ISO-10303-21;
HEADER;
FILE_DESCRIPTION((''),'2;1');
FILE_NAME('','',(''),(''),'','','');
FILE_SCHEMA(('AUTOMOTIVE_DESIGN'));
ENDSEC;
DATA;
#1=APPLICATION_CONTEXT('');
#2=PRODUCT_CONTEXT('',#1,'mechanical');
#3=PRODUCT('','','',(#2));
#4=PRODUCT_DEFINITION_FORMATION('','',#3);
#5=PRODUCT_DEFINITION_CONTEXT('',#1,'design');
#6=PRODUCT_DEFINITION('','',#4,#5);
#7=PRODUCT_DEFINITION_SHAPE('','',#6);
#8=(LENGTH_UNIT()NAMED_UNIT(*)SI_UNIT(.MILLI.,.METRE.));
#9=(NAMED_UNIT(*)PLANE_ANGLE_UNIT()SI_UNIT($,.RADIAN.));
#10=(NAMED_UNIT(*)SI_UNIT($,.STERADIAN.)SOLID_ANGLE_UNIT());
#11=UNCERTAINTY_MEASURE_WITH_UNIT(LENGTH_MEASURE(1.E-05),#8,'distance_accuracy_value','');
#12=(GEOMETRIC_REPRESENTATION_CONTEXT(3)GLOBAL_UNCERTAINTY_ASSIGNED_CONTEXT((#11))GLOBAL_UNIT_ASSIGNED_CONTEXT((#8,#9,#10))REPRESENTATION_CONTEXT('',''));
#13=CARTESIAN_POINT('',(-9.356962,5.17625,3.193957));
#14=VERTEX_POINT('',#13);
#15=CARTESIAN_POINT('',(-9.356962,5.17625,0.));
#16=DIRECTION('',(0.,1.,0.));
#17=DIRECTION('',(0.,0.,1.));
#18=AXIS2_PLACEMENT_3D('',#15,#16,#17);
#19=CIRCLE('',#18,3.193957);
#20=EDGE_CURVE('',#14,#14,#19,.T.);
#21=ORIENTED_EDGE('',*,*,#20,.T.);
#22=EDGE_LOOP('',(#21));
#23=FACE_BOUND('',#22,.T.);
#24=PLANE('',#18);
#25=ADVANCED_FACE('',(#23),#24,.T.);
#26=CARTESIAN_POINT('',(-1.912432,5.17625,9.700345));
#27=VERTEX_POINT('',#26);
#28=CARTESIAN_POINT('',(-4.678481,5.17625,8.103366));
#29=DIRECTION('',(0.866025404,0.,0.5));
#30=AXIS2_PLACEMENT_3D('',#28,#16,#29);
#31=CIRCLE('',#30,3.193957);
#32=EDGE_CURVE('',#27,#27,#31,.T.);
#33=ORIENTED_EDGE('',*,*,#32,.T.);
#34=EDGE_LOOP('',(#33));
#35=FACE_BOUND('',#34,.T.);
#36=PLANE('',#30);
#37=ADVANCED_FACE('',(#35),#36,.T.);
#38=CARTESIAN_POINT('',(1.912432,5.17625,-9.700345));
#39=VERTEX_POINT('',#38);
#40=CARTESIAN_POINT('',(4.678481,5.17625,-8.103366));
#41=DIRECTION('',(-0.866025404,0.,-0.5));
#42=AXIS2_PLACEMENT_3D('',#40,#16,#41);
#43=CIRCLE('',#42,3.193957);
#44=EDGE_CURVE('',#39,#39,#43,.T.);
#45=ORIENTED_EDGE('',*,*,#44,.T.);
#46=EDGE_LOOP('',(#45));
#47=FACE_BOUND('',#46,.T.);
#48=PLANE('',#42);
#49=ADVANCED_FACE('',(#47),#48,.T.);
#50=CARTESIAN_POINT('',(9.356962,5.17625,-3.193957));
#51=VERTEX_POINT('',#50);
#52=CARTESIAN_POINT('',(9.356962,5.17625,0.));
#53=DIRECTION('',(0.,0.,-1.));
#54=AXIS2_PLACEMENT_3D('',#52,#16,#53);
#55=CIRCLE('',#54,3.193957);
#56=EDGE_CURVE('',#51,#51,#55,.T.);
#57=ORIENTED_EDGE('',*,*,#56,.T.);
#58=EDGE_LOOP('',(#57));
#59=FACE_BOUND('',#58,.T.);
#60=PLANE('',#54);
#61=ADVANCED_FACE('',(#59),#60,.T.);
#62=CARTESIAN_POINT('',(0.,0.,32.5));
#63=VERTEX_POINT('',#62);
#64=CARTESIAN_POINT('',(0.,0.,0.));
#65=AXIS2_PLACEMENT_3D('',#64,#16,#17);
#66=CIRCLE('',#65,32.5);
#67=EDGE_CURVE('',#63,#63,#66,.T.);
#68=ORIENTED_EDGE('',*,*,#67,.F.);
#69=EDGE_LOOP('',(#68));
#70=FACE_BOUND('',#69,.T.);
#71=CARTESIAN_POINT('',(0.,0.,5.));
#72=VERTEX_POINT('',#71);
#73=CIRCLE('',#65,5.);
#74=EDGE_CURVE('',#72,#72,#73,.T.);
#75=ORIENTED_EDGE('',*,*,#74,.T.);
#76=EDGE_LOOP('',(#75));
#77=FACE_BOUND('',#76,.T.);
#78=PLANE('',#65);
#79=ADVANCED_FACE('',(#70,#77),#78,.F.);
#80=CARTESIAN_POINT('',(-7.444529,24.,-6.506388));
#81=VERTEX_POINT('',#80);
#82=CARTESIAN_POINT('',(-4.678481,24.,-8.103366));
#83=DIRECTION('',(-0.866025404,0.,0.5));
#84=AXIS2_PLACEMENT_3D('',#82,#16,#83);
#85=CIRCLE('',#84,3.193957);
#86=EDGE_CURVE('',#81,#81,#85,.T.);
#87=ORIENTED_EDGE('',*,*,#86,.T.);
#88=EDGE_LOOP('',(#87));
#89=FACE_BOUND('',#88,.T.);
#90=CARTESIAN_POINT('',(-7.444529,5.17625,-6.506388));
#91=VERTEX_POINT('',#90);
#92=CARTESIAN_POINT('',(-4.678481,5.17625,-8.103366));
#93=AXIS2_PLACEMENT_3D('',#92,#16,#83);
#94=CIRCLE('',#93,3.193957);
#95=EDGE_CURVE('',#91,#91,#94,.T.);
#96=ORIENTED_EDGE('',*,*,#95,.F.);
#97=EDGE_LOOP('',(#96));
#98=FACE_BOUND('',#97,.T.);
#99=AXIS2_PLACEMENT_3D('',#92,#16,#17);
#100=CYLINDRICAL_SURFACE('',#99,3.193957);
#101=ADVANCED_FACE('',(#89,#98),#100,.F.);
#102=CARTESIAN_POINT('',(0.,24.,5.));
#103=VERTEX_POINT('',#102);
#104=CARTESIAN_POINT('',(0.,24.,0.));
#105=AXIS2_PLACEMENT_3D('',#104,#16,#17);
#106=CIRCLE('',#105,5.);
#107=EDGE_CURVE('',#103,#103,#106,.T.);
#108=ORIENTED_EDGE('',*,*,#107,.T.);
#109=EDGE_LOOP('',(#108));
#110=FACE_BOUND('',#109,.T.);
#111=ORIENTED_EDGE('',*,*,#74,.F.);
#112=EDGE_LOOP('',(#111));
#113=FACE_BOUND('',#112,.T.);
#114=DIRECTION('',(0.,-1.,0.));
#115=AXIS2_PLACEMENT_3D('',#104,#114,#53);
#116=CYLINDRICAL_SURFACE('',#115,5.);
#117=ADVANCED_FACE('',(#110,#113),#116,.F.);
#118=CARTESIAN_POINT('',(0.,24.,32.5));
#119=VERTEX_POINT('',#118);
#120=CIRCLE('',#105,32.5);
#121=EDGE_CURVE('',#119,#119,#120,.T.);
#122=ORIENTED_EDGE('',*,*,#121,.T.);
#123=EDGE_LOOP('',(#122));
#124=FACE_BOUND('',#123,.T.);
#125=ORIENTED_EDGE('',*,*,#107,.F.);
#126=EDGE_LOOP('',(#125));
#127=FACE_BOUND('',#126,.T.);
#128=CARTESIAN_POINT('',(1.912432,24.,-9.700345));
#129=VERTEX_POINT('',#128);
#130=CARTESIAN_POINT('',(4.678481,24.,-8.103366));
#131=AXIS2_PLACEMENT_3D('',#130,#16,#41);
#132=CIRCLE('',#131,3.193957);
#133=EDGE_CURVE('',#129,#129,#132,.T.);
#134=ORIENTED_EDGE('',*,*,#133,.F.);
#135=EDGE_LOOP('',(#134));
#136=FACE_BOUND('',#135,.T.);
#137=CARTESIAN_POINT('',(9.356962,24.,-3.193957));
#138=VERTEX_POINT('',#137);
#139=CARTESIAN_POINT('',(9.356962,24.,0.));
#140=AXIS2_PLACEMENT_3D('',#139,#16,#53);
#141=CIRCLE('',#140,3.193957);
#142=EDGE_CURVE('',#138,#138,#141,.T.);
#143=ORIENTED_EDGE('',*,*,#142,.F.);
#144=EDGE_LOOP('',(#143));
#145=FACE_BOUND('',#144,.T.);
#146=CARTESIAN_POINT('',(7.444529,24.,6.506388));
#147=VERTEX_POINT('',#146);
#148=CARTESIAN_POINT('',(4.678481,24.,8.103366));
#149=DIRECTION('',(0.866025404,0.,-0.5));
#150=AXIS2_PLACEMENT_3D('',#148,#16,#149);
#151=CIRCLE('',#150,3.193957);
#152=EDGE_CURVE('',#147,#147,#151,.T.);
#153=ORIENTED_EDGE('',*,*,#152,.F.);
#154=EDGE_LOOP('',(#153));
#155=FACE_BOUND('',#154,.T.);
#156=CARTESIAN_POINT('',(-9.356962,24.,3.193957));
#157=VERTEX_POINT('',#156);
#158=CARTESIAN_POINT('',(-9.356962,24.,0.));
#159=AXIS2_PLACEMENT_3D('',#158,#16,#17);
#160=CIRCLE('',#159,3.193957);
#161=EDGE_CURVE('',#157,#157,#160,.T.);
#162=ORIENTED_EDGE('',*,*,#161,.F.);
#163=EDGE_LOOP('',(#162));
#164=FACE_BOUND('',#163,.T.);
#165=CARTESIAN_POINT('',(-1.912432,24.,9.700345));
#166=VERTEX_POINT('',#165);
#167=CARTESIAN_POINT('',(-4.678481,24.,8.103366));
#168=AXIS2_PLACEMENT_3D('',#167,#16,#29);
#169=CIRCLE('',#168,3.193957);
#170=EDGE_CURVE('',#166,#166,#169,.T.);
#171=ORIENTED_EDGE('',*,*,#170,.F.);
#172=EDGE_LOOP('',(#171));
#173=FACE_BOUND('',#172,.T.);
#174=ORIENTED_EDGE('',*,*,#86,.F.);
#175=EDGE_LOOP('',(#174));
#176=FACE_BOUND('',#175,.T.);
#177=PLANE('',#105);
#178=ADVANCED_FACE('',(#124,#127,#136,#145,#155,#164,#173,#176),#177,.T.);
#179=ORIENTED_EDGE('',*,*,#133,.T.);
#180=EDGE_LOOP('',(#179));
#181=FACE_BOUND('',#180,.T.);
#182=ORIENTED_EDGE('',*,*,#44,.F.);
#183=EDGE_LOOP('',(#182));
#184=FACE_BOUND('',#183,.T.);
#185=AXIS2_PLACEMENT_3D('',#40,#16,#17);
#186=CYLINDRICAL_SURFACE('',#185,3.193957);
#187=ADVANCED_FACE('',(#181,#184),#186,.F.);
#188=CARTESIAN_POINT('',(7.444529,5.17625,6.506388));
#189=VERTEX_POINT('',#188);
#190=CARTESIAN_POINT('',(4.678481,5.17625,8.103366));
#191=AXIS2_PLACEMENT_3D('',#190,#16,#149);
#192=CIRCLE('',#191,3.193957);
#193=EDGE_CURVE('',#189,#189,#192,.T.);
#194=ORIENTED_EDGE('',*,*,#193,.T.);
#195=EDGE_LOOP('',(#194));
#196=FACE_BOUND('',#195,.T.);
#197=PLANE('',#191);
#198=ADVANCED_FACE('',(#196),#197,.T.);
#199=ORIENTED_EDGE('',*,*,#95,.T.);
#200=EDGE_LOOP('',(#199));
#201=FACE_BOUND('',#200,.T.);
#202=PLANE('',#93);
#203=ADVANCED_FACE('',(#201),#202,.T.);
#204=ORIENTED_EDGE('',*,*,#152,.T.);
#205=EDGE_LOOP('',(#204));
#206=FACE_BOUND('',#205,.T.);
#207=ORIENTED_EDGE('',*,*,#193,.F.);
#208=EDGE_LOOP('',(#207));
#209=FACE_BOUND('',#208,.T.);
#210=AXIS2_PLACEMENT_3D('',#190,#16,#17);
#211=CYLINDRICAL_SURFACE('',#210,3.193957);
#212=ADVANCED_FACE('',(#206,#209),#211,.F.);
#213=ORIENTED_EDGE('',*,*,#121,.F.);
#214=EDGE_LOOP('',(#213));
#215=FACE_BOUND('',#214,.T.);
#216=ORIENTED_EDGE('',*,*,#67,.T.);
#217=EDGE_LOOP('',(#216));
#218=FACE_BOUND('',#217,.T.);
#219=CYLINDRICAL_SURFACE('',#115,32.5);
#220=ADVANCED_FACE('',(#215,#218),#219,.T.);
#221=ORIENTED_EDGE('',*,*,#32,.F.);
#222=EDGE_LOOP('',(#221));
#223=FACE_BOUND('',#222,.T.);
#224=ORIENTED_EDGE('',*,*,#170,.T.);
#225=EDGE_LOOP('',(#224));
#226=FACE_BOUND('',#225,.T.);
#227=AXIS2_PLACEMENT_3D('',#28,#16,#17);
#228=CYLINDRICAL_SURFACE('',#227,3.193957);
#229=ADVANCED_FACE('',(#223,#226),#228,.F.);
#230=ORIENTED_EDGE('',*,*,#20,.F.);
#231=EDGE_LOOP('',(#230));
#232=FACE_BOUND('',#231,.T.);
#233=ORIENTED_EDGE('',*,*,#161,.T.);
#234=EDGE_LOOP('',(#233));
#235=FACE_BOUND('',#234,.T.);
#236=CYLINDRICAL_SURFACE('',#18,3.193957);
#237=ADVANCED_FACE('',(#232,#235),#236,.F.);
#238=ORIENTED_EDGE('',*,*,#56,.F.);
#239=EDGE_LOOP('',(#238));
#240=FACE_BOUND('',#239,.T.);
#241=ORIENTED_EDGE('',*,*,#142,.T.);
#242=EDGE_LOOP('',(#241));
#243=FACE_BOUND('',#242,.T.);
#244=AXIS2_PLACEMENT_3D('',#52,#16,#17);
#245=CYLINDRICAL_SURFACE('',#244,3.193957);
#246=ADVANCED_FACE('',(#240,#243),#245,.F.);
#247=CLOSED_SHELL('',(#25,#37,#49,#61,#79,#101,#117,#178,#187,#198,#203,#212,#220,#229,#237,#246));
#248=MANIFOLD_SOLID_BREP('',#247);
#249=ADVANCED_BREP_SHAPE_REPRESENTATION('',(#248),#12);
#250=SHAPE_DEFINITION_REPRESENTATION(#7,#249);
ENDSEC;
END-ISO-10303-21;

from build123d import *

# Parameters (mm, degrees)
SKETCH1_R           = 32.5
BOSS_EXTRUDE1_DEPTH = 24
SKETCH2_R           = 5
CUT_EXTRUDE1_DEPTH  = 52.850747343
SKETCH3_R           = 3.193957473
CUT_EXTRUDE2_DEPTH  = 18.823750096
CIRPATTERN1_COUNT   = 6


with BuildPart() as part:
    # Sketch1 → Boss-Extrude1 (new body)
    with BuildSketch(Plane(origin=(0, 0, 0), x_dir=(1, 0, 0), z_dir=(0, 1, 0))):
        Circle(SKETCH1_R)
    extrude(amount=BOSS_EXTRUDE1_DEPTH)

    # Sketch2 → Cut-Extrude1 (cut, through all)
    with BuildSketch(Plane(origin=(0, 0, 0), x_dir=(1, 0, 0), z_dir=(0, 1, 0))):
        Circle(SKETCH2_R)
    extrude(amount=CUT_EXTRUDE1_DEPTH, mode=Mode.SUBTRACT)

    # Sketch3 → Cut-Extrude2 (cut)
    with BuildSketch(Plane(origin=(0, 24, 0), x_dir=(1, 0, 0), z_dir=(0, 1, 0))):
        with Locations((-9.356961517, 0)):
            Circle(SKETCH3_R)
    cut_extrude2 = extrude(amount=-CUT_EXTRUDE2_DEPTH, mode=Mode.SUBTRACT)

    # CirPattern1: Cut-Extrude2 ×6 about axis
    cirpattern1_axis = Axis((0, 0, 0), (0, 1, 0))
    for i in range(1, CIRPATTERN1_COUNT):
        add(cut_extrude2.rotate(cirpattern1_axis, i * 360 / CIRPATTERN1_COUNT), mode=Mode.SUBTRACT)


solid = part.part
